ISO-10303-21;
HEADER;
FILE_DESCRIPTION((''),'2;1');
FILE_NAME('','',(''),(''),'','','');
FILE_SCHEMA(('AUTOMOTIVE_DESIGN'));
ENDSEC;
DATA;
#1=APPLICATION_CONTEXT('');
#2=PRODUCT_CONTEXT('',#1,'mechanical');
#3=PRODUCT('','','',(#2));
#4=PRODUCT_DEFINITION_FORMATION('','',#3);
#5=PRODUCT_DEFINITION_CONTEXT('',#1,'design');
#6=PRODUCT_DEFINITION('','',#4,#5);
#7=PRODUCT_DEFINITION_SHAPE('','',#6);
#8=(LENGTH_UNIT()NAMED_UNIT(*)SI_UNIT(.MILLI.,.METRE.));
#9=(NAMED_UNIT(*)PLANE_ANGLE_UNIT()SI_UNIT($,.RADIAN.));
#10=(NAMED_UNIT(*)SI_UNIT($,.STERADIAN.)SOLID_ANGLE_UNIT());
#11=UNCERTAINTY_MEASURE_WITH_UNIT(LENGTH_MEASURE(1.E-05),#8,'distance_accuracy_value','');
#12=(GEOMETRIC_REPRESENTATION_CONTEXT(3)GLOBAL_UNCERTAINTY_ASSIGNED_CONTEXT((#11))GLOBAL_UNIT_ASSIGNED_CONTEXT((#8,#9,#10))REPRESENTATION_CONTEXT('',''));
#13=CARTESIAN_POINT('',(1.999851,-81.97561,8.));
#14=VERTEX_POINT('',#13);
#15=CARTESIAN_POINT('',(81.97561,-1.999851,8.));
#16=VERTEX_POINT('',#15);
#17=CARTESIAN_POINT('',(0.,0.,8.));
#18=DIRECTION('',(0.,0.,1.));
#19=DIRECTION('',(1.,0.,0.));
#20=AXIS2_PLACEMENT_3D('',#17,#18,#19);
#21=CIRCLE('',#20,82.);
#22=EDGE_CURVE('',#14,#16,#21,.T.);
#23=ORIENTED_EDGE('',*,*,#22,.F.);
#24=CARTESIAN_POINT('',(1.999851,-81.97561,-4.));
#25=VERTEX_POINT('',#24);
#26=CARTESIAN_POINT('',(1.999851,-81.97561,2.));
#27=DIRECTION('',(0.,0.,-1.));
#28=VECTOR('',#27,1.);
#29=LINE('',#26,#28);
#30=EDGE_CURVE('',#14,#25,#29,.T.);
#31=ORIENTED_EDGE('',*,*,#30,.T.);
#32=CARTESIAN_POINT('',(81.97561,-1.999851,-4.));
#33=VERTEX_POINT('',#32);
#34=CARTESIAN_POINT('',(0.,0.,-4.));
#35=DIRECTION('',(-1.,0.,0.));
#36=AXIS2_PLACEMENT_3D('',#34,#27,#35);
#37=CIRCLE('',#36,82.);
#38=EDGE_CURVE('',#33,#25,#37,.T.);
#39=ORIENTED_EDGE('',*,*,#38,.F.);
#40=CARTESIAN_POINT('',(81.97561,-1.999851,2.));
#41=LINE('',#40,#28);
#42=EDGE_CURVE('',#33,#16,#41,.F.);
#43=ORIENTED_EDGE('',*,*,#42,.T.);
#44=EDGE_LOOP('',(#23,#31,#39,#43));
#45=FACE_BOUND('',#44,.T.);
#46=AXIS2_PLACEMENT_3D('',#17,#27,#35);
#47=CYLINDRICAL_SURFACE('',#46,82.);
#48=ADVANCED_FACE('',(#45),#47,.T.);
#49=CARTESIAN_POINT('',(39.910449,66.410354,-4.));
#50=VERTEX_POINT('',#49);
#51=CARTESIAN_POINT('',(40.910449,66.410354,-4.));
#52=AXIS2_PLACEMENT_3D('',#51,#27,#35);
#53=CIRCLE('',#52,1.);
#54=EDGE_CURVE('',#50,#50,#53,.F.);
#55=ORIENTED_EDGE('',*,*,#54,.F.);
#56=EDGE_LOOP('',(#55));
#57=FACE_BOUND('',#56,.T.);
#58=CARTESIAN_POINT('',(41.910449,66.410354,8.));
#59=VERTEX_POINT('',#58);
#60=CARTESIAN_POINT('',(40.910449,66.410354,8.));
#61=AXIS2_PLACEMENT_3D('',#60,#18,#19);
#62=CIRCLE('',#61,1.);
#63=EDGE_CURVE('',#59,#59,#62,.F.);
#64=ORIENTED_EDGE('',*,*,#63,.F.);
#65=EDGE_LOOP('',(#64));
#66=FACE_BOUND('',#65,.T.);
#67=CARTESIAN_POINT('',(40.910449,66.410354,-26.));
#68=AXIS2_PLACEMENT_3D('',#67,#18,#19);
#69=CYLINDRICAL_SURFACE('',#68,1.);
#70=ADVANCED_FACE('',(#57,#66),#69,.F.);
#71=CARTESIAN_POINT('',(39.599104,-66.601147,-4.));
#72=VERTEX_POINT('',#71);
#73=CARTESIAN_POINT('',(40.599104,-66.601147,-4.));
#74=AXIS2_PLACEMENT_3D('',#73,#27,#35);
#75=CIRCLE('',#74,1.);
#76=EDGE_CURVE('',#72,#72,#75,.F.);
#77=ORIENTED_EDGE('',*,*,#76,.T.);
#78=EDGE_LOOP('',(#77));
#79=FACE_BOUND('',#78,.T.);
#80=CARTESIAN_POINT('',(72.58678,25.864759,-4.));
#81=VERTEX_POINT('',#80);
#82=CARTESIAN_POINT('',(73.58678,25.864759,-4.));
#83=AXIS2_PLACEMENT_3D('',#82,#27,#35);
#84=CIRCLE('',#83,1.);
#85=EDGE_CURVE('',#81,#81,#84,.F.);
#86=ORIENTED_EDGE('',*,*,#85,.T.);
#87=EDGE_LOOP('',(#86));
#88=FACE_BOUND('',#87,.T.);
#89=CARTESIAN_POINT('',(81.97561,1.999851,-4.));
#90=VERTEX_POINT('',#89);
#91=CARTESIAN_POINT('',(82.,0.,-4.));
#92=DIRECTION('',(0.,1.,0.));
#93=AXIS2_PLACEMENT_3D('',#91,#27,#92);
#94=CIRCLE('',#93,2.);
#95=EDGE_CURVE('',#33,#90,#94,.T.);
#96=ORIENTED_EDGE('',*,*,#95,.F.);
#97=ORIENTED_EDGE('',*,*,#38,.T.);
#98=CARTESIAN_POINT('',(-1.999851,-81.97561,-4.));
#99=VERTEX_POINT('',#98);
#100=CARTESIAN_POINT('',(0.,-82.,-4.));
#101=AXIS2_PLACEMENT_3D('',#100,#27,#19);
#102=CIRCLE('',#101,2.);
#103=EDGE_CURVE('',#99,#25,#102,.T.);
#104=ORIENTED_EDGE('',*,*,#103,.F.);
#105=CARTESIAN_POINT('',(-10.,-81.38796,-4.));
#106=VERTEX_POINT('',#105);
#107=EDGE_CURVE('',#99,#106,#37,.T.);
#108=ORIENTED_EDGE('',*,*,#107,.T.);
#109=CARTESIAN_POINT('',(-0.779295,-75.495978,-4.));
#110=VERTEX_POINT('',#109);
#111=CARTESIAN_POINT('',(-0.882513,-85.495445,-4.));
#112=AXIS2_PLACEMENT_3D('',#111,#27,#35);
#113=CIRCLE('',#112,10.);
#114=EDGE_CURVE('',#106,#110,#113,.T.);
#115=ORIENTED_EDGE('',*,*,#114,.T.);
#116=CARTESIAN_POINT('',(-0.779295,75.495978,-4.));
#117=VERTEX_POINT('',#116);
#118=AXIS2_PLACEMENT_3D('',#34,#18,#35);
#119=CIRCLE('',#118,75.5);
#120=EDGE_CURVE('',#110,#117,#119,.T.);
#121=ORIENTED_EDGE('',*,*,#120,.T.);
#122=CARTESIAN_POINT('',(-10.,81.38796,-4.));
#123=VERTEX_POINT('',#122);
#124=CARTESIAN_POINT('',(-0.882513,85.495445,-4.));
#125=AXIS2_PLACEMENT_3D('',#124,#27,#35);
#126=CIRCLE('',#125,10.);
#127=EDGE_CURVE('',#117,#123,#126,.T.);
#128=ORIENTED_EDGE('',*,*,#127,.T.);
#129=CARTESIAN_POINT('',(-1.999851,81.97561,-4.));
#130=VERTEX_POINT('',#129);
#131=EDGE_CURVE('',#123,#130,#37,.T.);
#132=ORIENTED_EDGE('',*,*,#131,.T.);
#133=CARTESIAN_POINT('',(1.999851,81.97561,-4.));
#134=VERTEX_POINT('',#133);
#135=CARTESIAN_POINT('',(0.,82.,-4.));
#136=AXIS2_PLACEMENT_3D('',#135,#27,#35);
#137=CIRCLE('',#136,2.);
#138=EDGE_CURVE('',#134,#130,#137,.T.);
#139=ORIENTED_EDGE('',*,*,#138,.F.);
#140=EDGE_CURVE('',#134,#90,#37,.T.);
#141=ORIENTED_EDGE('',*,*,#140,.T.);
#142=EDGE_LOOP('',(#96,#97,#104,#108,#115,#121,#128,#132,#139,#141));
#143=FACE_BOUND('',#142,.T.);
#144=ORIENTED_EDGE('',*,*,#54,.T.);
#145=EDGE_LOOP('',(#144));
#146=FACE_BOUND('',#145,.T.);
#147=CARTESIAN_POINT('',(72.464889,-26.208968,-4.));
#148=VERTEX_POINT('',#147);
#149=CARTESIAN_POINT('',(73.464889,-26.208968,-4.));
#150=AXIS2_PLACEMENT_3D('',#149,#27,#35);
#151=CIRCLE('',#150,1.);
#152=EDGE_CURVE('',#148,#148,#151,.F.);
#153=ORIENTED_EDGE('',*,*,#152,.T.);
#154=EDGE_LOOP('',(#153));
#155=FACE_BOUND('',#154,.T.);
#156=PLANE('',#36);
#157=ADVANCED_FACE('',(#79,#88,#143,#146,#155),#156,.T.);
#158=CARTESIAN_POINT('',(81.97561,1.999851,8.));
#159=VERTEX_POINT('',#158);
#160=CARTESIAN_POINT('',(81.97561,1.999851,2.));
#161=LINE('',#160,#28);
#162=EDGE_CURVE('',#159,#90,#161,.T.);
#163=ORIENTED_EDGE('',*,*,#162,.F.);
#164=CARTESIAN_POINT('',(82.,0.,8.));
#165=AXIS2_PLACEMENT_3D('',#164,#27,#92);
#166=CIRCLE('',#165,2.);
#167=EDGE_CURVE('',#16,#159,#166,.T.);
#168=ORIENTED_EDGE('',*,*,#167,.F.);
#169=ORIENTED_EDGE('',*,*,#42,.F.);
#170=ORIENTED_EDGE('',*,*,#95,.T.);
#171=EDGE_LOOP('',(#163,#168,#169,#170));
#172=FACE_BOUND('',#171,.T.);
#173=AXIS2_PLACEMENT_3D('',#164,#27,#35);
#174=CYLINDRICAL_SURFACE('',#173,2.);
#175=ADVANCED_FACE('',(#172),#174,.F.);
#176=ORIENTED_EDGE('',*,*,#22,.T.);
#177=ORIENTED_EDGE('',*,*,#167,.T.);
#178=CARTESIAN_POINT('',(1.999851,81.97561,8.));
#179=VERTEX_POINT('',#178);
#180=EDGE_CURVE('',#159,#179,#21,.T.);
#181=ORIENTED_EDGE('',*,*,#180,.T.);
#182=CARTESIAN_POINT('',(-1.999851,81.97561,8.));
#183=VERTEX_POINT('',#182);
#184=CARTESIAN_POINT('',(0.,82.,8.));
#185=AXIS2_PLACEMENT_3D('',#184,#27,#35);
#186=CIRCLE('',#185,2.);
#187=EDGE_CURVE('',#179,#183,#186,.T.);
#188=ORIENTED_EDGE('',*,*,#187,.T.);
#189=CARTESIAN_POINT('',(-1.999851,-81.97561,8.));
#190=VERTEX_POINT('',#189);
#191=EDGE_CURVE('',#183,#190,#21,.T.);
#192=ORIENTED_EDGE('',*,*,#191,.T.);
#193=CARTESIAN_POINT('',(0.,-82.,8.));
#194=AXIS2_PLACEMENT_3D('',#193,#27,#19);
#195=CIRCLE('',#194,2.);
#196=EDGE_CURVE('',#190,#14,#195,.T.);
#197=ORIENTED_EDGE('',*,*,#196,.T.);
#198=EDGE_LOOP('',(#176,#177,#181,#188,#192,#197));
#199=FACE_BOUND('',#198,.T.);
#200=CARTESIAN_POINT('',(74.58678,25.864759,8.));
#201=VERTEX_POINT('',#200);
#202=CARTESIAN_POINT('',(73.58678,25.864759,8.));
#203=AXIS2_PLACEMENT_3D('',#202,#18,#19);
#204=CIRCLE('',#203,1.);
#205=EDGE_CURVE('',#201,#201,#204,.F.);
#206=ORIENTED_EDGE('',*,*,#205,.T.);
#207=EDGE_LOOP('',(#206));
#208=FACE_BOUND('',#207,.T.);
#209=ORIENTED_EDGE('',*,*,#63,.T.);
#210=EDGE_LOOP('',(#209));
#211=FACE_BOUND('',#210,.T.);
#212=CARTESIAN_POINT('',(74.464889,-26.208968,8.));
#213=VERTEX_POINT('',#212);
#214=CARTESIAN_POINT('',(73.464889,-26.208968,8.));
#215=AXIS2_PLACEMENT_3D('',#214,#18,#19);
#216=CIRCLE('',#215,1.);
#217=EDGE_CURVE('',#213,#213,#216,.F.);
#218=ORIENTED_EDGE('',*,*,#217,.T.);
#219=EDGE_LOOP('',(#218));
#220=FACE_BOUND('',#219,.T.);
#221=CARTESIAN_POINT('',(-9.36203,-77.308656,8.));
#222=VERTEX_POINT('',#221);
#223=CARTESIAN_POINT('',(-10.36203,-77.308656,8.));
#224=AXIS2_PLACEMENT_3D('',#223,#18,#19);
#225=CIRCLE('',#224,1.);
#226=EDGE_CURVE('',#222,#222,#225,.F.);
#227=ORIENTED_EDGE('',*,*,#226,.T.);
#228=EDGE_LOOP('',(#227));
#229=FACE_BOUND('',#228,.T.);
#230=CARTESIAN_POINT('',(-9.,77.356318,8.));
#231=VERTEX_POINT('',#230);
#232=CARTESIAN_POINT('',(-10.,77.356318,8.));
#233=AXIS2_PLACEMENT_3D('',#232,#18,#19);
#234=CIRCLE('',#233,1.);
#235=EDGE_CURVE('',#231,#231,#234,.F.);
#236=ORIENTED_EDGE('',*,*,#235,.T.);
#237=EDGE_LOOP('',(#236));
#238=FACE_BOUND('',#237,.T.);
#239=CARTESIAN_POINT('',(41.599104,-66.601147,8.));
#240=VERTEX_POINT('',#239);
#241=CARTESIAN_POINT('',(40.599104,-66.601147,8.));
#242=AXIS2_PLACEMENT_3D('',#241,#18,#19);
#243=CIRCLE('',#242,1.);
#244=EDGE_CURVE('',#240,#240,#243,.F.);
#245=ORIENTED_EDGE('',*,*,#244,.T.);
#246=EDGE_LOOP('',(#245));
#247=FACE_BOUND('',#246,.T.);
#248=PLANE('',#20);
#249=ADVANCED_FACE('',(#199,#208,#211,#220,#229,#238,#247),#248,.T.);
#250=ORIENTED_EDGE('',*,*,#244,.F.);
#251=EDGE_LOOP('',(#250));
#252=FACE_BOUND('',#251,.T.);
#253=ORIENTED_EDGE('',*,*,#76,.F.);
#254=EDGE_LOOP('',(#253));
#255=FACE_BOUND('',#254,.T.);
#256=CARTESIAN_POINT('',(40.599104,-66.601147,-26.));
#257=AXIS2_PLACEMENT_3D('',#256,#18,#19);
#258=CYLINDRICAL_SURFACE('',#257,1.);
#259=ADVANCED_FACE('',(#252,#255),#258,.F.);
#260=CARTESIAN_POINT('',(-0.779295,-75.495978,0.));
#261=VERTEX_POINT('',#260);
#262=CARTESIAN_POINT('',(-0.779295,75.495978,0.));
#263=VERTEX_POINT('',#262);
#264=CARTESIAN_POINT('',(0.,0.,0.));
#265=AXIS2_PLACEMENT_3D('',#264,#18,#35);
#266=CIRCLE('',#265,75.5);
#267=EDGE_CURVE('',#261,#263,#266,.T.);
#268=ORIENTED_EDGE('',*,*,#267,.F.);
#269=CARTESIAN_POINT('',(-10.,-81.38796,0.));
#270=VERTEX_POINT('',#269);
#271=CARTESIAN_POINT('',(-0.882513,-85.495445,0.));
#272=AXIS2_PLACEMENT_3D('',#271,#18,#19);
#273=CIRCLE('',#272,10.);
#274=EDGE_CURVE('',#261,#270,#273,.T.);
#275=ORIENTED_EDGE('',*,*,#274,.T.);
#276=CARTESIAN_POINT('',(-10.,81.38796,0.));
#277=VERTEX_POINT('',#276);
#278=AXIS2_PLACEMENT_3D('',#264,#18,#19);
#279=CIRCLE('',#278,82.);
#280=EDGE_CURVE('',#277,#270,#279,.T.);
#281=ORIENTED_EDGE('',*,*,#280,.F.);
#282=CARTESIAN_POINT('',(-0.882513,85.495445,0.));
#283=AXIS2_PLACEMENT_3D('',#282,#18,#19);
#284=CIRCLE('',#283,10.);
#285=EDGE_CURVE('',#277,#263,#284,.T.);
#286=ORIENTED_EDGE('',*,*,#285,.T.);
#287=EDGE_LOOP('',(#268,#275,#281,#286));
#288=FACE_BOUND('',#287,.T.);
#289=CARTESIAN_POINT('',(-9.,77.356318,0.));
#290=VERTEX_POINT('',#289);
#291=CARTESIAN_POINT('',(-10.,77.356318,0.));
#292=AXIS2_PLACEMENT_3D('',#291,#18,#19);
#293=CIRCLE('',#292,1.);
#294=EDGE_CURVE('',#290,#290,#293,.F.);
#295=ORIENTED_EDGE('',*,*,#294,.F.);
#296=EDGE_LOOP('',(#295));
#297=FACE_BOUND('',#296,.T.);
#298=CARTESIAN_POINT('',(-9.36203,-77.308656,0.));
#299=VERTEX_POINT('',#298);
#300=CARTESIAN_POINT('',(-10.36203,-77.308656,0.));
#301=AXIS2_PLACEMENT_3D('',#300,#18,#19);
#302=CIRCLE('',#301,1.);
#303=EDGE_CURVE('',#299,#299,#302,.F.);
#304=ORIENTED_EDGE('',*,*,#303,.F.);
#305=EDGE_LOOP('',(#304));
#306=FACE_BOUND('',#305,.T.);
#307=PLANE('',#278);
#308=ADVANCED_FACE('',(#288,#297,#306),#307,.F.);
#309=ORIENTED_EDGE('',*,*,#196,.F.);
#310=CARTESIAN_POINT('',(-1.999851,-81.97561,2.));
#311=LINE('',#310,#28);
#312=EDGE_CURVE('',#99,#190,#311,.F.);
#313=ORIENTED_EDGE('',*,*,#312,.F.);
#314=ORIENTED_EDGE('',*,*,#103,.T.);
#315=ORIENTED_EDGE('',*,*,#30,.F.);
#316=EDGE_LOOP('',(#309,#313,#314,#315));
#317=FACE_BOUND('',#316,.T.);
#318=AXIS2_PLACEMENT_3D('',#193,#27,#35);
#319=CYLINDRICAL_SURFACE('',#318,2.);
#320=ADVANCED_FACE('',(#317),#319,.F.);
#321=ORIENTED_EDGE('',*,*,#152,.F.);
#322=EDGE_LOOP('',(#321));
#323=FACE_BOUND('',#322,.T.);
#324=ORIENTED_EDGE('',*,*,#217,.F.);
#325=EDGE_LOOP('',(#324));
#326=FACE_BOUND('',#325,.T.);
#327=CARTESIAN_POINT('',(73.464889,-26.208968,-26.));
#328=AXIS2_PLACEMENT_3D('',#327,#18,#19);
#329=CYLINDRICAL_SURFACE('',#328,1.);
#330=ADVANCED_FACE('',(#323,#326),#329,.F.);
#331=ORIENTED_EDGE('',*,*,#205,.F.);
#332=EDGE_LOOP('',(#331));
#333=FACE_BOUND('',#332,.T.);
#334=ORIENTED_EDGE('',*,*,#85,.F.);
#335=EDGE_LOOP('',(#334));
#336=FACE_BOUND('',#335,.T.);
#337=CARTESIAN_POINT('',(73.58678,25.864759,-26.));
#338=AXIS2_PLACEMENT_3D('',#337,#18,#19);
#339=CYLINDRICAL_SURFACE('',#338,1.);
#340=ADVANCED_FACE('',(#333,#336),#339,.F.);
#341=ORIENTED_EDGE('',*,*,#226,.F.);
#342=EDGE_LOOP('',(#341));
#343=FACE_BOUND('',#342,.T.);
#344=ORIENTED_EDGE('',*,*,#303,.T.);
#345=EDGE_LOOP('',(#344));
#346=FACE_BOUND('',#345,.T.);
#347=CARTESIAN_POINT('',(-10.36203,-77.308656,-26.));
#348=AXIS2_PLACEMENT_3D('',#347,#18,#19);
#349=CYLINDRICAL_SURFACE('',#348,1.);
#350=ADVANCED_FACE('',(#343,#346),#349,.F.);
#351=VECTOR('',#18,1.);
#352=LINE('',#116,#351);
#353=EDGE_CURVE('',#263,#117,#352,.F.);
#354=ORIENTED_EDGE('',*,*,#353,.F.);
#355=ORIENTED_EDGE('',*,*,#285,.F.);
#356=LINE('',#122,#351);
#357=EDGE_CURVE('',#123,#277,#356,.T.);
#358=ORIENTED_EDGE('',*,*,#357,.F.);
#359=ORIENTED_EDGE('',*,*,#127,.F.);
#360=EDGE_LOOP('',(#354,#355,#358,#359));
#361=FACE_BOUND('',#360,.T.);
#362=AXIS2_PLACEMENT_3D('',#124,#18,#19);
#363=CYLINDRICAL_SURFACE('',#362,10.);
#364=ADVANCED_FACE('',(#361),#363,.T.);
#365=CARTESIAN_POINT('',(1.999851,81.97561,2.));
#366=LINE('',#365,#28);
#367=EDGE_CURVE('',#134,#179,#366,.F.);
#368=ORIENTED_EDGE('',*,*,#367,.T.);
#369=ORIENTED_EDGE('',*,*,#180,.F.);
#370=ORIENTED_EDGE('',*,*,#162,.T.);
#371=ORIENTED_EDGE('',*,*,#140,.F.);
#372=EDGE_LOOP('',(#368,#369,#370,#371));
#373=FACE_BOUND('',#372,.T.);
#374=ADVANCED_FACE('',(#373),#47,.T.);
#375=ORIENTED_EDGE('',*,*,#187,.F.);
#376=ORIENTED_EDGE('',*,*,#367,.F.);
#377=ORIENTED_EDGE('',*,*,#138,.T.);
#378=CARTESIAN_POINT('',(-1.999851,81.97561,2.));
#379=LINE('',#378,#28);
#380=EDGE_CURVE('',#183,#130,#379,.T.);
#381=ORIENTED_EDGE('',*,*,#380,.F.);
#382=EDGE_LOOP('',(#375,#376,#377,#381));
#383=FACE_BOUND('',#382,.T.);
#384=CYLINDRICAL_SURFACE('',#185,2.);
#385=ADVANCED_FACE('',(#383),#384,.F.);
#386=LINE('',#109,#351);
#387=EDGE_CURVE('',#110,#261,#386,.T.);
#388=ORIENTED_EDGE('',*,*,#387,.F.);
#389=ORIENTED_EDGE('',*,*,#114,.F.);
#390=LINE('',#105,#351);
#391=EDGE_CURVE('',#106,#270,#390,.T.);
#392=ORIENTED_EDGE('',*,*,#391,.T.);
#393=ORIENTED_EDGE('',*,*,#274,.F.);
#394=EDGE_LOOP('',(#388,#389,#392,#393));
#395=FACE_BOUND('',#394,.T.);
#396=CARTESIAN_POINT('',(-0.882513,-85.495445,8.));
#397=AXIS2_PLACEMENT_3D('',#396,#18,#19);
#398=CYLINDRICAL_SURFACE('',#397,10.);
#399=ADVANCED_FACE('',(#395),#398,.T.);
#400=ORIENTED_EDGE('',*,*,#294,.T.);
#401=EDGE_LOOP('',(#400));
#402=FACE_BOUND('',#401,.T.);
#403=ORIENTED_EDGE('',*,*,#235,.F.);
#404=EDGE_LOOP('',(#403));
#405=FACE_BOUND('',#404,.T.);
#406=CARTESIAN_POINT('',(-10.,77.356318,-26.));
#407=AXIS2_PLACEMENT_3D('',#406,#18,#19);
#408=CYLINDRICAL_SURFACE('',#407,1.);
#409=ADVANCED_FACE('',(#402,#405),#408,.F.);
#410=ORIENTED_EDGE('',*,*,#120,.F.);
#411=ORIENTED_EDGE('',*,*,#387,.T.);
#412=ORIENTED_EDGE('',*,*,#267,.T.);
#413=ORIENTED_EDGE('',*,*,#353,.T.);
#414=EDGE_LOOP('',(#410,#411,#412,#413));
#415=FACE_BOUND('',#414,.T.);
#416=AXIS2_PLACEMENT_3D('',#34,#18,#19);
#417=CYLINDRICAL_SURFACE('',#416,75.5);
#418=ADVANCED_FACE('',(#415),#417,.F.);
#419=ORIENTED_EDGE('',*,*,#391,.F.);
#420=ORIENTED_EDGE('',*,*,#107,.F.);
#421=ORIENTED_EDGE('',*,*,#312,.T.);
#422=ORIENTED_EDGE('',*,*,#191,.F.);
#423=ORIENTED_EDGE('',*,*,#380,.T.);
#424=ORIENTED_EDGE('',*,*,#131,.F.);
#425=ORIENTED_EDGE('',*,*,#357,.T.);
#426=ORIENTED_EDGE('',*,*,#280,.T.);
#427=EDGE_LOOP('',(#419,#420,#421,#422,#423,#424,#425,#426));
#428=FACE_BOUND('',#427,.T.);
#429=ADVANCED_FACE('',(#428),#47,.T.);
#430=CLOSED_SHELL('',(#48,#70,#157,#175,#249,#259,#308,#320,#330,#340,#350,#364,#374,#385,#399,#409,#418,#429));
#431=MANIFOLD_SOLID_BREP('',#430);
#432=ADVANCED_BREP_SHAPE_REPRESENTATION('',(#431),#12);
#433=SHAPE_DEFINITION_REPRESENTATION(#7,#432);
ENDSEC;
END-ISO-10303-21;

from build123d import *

# Parameters (mm, degrees)
SKETCH1_R           = 82
BOSS_EXTRUDE1_DEPTH = 8
BOSS_EXTRUDE3_START = 4
BOSS_EXTRUDE3_DEPTH = 4
FILLET1_R           = 10
SKETCH8_R           = 2
CUT_EXTRUDE4_DEPTH  = 12
CIRPATTERN4_COUNT   = 3
CIRPATTERN4_ANGLE   = 180
CUT_EXTRUDE5_START  = -12
SKETCH9_R           = 1
CUT_EXTRUDE5_DEPTH  = 38
CIRPATTERN5_COUNT   = 6
CIRPATTERN5_ANGLE   = 195


with BuildPart() as part:
    # Sketch1 → Boss-Extrude1 (new body)
    with BuildSketch(Plane.XY):
        Circle(SKETCH1_R)
    extrude(amount=BOSS_EXTRUDE1_DEPTH)

    # Sketch3 → Boss-Extrude3 (add)
    with BuildSketch(Plane(origin=(0, 0, 0), x_dir=(-1, 0, 0), z_dir=(0, 0, -1)).offset(BOSS_EXTRUDE3_START)):
        with BuildLine():
            Line((10, 81.387959798), (10, 74.8348181))
            ThreePointArc((10, 74.8348181), (-75.5, 0), (10, -74.8348181))
            Line((10, -74.8348181), (10, -81.387959798))
            ThreePointArc((10, -81.387959798), (-82, 0), (10, 81.387959798))
        make_face()
    extrude(amount=-BOSS_EXTRUDE3_DEPTH)

    # Fillet1
    # the kernel refuses this fillet: 10 mm, written as the material it takes off along each edge
    with BuildSketch(Plane(origin=(-10, 74.8348181, -27.110945108), x_dir=(0, 1, 0), z_dir=(0, 0, 1))) as fillet1_piece_1:
        with BuildLine():
            CenterArc((10.660627219, -9.117486644), FILLET1_R, 114.251866349, 66.339539365)
            ThreePointArc((0.66115993, -9.22070458), (0.471837745, -4.600223565), (0, 0))
            Line((0, 0), (6.553141698, 0))
        make_face()
    extrude(amount=27.110945108, mode=Mode.SUBTRACT)
    with BuildSketch(Plane(origin=(-10, -74.8348181, -27.110945108), x_dir=(0, -1, 0), z_dir=(0, 0, 1))) as fillet1_piece_2:
        with BuildLine():
            CenterArc((10.660627219, 9.117486644), FILLET1_R, 179.408594286, 66.339539365)
            ThreePointArc((0.66115993, 9.22070458), (0.471837745, 4.600223565), (0, 0))
            Line((0, 0), (6.553141698, 0))
        make_face()
    extrude(amount=27.110945108, mode=Mode.SUBTRACT)

    # Sketch8 → Cut-Extrude4 (cut)
    with BuildSketch(Plane(origin=(0, 0, -4), x_dir=(-1, 0, 0), z_dir=(0, 0, -1))):
        with Locations((0, 82)):
            Circle(SKETCH8_R)
    cut_extrude4 = extrude(amount=-CUT_EXTRUDE4_DEPTH, mode=Mode.SUBTRACT)

    # CirPattern4: Cut-Extrude4 ×3 about axis
    cirpattern4_axis = Axis((0, 0, 0), (0, 0, -1))
    for i in range(1, CIRPATTERN4_COUNT):
        add(cut_extrude4.rotate(cirpattern4_axis, i * CIRPATTERN4_ANGLE / (CIRPATTERN4_COUNT - 1)), mode=Mode.SUBTRACT)

    # Sketch9 → Cut-Extrude5 (cut)
    with BuildSketch(Plane(origin=(0, 0, 0), x_dir=(-1, 0, 0), z_dir=(0, 0, -1)).offset(CUT_EXTRUDE5_START)):
        with Locations(Location((10, 77.356318423, 0), (0, 0, 180))):
            Circle(SKETCH9_R)
    cut_extrude5 = extrude(amount=CUT_EXTRUDE5_DEPTH, mode=Mode.SUBTRACT)

    # CirPattern5: Cut-Extrude5 ×6 about axis
    cirpattern5_axis = Axis((0, 0, 0), (0, 0, -1))
    for i in range(1, CIRPATTERN5_COUNT):
        add(cut_extrude5.rotate(cirpattern5_axis, i * CIRPATTERN5_ANGLE / (CIRPATTERN5_COUNT - 1)), mode=Mode.SUBTRACT)


solid = part.part
